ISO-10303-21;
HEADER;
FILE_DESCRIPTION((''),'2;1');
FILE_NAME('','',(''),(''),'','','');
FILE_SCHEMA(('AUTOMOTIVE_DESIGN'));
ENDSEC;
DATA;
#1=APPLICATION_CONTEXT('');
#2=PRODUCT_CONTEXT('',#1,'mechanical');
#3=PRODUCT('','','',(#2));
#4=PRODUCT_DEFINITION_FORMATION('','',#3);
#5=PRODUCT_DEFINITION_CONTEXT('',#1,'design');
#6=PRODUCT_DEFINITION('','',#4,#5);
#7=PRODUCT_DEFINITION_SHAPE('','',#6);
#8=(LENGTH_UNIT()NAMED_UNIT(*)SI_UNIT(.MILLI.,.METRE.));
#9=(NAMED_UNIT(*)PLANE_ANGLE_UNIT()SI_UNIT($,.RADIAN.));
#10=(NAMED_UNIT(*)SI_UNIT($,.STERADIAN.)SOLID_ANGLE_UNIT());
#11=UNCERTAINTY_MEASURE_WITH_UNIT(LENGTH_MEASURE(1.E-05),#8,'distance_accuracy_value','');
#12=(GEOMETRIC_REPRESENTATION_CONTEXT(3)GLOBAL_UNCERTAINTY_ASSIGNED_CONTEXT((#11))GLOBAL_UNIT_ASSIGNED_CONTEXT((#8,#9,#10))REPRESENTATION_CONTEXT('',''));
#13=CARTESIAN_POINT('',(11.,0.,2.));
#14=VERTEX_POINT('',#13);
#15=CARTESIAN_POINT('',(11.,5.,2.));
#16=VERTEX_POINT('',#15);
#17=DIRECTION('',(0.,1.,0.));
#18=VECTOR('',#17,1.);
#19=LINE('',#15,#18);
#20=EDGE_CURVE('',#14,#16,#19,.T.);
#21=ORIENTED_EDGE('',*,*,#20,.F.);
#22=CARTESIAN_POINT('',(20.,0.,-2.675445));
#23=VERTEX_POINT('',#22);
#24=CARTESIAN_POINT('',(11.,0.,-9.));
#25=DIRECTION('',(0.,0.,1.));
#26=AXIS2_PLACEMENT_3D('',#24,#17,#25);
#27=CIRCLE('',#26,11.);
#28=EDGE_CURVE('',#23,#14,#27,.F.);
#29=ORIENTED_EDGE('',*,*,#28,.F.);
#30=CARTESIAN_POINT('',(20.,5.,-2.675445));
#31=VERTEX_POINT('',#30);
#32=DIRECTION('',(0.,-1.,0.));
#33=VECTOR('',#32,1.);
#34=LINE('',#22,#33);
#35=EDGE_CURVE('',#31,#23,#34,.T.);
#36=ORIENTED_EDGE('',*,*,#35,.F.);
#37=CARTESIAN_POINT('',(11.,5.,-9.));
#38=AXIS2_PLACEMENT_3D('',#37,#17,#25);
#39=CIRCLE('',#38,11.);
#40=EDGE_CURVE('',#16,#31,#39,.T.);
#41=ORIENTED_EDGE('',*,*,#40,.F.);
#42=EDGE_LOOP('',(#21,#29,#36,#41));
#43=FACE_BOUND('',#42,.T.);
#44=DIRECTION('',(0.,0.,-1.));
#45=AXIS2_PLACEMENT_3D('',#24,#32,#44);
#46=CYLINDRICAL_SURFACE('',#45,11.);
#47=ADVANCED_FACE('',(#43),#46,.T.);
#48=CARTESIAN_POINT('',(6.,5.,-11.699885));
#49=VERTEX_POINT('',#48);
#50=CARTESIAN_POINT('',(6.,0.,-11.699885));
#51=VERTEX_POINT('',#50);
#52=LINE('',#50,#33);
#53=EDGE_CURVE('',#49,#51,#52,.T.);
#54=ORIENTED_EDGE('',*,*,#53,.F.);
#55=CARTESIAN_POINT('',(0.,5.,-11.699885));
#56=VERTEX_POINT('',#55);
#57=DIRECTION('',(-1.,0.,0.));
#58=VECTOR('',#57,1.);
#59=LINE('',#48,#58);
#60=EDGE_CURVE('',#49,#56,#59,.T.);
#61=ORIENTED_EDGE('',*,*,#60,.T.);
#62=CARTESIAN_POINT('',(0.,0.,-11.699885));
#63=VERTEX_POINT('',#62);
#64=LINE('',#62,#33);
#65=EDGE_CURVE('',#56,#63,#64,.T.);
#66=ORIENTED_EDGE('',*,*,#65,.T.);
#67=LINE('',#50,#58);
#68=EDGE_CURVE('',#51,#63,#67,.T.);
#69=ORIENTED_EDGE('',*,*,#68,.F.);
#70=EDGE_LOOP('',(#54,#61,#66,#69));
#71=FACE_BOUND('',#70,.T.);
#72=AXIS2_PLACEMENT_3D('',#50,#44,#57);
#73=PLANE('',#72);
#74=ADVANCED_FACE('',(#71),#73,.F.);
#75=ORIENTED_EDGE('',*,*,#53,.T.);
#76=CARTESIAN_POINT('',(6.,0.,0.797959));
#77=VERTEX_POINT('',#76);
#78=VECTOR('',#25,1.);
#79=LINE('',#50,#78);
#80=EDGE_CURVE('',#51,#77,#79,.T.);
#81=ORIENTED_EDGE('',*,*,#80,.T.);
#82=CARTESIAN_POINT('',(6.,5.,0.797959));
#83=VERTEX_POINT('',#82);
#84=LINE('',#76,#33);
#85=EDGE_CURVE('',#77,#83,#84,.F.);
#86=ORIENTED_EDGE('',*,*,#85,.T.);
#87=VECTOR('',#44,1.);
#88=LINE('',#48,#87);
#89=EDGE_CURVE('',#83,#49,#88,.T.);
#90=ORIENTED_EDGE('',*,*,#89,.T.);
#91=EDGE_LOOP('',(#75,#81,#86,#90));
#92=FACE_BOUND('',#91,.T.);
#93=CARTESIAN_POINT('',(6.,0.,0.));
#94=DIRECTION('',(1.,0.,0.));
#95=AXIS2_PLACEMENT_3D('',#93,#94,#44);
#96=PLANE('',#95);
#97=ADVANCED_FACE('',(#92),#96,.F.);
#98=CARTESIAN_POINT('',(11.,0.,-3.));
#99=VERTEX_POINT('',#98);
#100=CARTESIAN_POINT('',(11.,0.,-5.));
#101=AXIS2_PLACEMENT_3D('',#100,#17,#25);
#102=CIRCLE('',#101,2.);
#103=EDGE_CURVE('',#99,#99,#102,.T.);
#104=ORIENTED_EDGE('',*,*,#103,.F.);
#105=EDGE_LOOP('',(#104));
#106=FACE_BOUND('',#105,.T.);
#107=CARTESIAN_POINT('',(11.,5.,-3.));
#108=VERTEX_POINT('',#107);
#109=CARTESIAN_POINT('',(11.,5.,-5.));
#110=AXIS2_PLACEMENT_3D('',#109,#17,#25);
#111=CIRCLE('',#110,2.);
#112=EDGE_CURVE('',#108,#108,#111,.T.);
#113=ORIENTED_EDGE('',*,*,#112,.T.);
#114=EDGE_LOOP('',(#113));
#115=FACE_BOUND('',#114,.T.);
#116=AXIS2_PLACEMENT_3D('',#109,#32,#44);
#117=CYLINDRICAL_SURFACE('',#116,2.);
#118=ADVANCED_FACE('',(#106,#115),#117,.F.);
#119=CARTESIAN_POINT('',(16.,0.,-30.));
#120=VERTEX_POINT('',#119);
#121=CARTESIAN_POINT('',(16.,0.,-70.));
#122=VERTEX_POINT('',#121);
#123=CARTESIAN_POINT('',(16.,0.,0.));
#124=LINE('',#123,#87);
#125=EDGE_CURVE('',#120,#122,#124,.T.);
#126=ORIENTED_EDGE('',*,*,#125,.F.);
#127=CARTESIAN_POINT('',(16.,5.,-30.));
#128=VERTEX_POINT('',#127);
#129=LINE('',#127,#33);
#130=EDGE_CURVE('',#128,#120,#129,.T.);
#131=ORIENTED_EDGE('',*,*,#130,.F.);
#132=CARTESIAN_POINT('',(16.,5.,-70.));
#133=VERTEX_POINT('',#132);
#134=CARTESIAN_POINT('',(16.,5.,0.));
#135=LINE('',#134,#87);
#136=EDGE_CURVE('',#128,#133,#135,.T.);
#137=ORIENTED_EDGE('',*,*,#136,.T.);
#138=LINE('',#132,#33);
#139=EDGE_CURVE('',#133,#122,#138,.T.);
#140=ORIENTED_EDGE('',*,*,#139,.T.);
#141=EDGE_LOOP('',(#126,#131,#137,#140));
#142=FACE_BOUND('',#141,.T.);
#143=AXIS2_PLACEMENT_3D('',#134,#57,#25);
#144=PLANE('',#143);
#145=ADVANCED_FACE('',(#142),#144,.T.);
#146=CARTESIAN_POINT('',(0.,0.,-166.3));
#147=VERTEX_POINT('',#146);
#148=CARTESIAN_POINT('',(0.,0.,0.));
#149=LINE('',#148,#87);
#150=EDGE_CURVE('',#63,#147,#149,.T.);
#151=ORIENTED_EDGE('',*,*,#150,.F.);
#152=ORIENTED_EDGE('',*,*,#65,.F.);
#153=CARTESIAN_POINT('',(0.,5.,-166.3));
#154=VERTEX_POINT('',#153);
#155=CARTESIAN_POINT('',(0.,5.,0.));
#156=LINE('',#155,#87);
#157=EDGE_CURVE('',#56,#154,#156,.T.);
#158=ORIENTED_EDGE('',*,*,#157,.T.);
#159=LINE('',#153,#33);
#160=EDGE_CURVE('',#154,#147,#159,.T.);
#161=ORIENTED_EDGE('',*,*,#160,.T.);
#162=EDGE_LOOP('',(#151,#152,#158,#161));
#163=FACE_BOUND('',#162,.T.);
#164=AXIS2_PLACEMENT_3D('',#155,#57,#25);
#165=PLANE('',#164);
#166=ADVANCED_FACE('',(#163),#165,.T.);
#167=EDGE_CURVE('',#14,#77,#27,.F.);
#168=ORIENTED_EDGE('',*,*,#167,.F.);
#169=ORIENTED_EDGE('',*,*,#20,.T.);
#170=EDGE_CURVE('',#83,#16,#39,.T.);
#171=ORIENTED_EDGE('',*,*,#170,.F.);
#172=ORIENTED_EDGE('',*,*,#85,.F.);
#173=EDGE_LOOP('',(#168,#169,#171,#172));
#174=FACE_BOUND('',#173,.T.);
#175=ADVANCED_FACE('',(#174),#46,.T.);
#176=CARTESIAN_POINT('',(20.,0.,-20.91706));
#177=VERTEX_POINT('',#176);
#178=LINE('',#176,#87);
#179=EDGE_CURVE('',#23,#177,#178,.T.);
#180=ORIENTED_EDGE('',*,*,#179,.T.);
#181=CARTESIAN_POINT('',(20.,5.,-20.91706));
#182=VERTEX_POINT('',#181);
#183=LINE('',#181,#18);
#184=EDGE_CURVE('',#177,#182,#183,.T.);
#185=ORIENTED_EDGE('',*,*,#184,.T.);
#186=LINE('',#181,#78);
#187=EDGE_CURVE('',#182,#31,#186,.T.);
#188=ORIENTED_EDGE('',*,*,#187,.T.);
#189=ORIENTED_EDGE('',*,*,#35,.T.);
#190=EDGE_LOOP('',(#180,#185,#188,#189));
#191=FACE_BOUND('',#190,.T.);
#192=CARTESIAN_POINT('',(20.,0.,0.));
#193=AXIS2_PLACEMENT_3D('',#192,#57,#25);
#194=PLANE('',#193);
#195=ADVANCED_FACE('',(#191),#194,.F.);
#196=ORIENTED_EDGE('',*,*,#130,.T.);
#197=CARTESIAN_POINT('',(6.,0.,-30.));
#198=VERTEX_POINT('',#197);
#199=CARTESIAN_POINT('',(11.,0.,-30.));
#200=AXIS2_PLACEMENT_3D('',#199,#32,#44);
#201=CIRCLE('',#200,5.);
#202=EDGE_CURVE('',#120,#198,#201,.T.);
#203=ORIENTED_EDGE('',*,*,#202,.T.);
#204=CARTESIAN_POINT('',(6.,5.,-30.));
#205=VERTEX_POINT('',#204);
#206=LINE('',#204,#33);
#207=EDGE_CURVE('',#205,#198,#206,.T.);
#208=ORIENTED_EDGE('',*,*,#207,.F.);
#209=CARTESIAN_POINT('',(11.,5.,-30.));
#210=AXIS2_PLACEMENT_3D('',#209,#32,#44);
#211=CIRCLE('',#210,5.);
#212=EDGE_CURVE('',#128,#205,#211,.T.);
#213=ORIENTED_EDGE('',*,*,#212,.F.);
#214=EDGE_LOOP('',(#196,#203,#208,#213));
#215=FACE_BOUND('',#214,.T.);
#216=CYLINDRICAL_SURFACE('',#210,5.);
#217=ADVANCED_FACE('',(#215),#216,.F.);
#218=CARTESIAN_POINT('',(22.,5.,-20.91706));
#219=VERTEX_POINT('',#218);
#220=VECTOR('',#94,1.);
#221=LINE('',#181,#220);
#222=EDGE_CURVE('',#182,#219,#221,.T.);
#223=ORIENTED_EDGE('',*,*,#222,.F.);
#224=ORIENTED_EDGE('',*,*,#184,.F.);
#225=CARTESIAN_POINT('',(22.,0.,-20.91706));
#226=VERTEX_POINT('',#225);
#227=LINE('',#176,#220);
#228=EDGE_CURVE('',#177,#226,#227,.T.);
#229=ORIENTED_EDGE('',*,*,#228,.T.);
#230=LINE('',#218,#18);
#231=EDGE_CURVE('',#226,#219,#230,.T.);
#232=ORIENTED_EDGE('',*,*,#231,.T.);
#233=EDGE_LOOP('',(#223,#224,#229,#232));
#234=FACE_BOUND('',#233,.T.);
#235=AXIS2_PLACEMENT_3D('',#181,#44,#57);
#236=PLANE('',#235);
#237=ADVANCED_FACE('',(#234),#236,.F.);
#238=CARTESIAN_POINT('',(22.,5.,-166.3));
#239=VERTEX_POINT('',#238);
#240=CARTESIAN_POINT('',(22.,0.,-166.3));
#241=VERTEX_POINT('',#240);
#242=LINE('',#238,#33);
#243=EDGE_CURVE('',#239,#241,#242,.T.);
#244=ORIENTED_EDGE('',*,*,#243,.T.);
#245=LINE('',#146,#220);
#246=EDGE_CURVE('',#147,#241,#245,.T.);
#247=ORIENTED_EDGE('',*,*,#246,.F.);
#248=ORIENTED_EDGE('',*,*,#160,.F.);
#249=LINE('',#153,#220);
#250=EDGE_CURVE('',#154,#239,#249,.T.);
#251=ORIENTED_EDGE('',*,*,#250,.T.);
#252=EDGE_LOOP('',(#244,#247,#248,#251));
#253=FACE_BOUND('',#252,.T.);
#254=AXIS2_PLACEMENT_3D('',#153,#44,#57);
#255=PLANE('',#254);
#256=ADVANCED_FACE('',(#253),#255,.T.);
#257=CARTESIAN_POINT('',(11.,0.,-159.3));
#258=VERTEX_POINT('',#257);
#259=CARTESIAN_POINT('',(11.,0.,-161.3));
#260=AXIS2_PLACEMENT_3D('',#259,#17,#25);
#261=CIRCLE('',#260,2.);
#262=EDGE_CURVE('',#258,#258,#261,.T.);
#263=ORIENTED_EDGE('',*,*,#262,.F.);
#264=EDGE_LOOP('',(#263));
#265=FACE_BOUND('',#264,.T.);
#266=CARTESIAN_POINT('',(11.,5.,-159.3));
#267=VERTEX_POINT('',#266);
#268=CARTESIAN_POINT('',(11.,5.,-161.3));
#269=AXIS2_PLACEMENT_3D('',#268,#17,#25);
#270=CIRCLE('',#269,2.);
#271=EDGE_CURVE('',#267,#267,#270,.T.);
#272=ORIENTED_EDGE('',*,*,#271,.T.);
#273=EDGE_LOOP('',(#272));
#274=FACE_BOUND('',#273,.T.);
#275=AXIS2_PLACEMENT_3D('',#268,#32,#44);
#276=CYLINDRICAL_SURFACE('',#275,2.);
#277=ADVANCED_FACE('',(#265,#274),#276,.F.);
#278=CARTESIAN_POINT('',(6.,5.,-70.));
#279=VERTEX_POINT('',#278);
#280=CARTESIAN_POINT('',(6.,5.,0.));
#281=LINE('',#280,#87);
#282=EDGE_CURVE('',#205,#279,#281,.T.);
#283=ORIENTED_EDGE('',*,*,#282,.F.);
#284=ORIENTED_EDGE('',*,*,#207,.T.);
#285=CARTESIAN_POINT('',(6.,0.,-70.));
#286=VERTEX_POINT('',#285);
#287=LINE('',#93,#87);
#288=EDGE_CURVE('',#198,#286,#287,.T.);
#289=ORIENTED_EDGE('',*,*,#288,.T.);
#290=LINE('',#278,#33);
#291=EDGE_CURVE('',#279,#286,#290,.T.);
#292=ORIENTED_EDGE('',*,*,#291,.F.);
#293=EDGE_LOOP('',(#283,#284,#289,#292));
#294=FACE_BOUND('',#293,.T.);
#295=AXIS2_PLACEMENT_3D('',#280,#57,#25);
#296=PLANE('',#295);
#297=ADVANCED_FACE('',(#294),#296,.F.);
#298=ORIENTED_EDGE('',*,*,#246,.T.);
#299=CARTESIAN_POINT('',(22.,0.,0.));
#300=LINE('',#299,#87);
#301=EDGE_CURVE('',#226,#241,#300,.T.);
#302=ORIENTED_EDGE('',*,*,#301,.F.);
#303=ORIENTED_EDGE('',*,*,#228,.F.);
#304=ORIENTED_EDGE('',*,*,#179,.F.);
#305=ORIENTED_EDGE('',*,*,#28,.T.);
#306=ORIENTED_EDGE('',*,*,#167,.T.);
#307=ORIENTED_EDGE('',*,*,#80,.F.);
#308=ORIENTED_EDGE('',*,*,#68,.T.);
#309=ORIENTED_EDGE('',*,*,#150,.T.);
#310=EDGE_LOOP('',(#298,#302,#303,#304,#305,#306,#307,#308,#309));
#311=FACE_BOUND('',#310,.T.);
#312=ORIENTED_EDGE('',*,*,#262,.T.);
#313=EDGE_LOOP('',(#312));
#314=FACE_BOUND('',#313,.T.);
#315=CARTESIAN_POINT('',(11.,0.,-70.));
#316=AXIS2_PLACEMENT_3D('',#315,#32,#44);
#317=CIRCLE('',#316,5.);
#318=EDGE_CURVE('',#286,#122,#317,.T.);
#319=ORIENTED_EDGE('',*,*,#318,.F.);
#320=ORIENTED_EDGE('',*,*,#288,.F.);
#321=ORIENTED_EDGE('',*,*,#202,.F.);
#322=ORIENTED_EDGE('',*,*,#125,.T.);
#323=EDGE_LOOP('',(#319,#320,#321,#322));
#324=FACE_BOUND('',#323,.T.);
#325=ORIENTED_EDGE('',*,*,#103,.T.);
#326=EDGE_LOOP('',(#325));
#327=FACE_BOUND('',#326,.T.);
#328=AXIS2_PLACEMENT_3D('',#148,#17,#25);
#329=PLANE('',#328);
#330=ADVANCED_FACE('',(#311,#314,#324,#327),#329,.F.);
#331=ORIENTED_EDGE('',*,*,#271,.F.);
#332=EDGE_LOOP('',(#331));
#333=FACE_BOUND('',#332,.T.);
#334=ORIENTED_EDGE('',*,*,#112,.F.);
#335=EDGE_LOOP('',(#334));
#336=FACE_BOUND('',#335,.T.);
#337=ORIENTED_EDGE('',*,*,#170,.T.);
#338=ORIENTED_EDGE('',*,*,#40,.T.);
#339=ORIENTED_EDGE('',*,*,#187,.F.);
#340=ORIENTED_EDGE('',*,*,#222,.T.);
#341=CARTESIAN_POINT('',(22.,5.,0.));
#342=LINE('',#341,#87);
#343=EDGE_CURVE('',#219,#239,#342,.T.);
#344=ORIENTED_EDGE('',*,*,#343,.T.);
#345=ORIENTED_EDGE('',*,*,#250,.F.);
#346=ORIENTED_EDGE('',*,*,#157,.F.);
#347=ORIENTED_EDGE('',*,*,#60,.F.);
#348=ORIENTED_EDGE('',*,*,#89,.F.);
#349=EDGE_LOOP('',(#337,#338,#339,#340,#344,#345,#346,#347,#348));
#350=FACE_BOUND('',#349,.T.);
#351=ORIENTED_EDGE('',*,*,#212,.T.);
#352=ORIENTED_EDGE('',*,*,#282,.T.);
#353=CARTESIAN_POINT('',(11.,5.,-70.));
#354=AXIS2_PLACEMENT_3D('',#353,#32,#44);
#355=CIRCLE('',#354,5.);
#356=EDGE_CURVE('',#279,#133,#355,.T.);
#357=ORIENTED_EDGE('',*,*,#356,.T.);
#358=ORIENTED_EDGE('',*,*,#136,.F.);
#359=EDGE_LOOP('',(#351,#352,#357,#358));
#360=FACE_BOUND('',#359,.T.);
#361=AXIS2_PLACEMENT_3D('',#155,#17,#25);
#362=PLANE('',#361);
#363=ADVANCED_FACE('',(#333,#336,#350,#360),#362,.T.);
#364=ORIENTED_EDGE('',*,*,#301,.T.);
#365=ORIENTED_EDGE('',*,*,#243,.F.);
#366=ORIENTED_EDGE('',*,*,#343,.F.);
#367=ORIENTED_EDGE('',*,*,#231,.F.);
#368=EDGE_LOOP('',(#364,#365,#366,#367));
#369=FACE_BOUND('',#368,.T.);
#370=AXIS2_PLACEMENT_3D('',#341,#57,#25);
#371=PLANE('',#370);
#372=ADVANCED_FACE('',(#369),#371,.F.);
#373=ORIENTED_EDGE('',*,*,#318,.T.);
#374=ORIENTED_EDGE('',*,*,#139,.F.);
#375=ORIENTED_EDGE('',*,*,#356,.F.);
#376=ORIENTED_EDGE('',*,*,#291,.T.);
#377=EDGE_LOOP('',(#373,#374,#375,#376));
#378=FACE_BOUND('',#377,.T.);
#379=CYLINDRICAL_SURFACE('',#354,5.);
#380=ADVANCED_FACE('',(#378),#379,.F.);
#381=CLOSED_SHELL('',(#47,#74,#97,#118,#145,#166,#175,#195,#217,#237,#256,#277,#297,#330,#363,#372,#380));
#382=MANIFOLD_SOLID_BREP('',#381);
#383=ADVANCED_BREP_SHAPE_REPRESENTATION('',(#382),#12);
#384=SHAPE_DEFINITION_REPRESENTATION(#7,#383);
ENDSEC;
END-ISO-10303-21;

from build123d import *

# Parameters (mm, degrees)
SKETCH1_W           = 22
SKETCH1_H           = 166.3
SKETCH1_R           = 2
BOSS_EXTRUDE1_DEPTH = 5
CUT_EXTRUDE1_DEPTH  = 5
SKETCH3_W           = 22
SKETCH3_H           = 5
BOSS_EXTRUDE2_DEPTH = 6
SKETCH4_W           = 22
SKETCH4_H           = 5
CUT_EXTRUDE2_DEPTH  = 4
FILLET2_R           = 11
SKETCH5_W           = 19.280438378
SKETCH5_H           = 5
CUT_EXTRUDE3_DEPTH  = 6
SKETCH7_W           = 29.371075178
SKETCH7_H           = 5
CUT_EXTRUDE4_DEPTH  = 2


with BuildPart() as part:
    # Sketch1 → Boss-Extrude1 (new body)
    with BuildSketch(Plane(origin=(0, 0, 0), x_dir=(1, 0, 0), z_dir=(0, 1, 0))):
        with Locations((11, 83.15)):
            Rectangle(SKETCH1_W, SKETCH1_H)
        with Locations(Location((11, 5, 0), (0, 0, 270))):
            Circle(SKETCH1_R, mode=Mode.SUBTRACT)
        with Locations(Location((11, 161.3, 0), (0, 0, 270))):
            Circle(SKETCH1_R, mode=Mode.SUBTRACT)
    extrude(amount=BOSS_EXTRUDE1_DEPTH)

    # Sketch2 → Cut-Extrude1 (cut)
    with BuildSketch(Plane(origin=(0, 0, 0), x_dir=(-1, 0, 0), z_dir=(0, -1, 0))):
        with BuildLine():
            Line((-16, 30), (-16, 70))
            ThreePointArc((-16, 70), (-11, 75), (-6, 70))
            Line((-6, 70), (-6, 30))
            ThreePointArc((-6, 30), (-11, 25), (-16, 30))
        make_face()
    extrude(amount=-CUT_EXTRUDE1_DEPTH, mode=Mode.SUBTRACT)

    # Sketch3 → Boss-Extrude2 (add)
    with BuildSketch(Plane.XY):
        with Locations((11, 2.5)):
            Rectangle(SKETCH3_W, SKETCH3_H)
    extrude(amount=BOSS_EXTRUDE2_DEPTH)

    # Sketch4 → Cut-Extrude2 (cut)
    with BuildSketch(Plane.XY.offset(6)):
        with Locations((11, 2.5)):
            Rectangle(SKETCH4_W, SKETCH4_H)
    extrude(amount=-CUT_EXTRUDE2_DEPTH, mode=Mode.SUBTRACT)

    # Fillet2
    fillet2_edges = [part.edges().sort_by_distance(p)[0] for p in [
        (0, 2.5, 2),
        (22, 2.5, 2),
    ]]
    fillet(fillet2_edges, radius=FILLET2_R - 0.0001)  # a hair under: the kernel refuses the full size

    # Sketch5 → Cut-Extrude3 (cut)
    with BuildSketch(Plane.ZY):
        with Locations((-2.059665651, 2.5)):
            Rectangle(SKETCH5_W, SKETCH5_H)
    extrude(amount=-CUT_EXTRUDE3_DEPTH, mode=Mode.SUBTRACT)

    # Sketch7 → Cut-Extrude4 (cut)
    with BuildSketch(Plane(origin=(22, 0, 0), x_dir=(0, 0, -1), z_dir=(1, 0, 0))):
        with Locations((6.231522195, 2.5)):
            Rectangle(SKETCH7_W, SKETCH7_H)
    extrude(amount=-CUT_EXTRUDE4_DEPTH, mode=Mode.SUBTRACT)


solid = part.part
